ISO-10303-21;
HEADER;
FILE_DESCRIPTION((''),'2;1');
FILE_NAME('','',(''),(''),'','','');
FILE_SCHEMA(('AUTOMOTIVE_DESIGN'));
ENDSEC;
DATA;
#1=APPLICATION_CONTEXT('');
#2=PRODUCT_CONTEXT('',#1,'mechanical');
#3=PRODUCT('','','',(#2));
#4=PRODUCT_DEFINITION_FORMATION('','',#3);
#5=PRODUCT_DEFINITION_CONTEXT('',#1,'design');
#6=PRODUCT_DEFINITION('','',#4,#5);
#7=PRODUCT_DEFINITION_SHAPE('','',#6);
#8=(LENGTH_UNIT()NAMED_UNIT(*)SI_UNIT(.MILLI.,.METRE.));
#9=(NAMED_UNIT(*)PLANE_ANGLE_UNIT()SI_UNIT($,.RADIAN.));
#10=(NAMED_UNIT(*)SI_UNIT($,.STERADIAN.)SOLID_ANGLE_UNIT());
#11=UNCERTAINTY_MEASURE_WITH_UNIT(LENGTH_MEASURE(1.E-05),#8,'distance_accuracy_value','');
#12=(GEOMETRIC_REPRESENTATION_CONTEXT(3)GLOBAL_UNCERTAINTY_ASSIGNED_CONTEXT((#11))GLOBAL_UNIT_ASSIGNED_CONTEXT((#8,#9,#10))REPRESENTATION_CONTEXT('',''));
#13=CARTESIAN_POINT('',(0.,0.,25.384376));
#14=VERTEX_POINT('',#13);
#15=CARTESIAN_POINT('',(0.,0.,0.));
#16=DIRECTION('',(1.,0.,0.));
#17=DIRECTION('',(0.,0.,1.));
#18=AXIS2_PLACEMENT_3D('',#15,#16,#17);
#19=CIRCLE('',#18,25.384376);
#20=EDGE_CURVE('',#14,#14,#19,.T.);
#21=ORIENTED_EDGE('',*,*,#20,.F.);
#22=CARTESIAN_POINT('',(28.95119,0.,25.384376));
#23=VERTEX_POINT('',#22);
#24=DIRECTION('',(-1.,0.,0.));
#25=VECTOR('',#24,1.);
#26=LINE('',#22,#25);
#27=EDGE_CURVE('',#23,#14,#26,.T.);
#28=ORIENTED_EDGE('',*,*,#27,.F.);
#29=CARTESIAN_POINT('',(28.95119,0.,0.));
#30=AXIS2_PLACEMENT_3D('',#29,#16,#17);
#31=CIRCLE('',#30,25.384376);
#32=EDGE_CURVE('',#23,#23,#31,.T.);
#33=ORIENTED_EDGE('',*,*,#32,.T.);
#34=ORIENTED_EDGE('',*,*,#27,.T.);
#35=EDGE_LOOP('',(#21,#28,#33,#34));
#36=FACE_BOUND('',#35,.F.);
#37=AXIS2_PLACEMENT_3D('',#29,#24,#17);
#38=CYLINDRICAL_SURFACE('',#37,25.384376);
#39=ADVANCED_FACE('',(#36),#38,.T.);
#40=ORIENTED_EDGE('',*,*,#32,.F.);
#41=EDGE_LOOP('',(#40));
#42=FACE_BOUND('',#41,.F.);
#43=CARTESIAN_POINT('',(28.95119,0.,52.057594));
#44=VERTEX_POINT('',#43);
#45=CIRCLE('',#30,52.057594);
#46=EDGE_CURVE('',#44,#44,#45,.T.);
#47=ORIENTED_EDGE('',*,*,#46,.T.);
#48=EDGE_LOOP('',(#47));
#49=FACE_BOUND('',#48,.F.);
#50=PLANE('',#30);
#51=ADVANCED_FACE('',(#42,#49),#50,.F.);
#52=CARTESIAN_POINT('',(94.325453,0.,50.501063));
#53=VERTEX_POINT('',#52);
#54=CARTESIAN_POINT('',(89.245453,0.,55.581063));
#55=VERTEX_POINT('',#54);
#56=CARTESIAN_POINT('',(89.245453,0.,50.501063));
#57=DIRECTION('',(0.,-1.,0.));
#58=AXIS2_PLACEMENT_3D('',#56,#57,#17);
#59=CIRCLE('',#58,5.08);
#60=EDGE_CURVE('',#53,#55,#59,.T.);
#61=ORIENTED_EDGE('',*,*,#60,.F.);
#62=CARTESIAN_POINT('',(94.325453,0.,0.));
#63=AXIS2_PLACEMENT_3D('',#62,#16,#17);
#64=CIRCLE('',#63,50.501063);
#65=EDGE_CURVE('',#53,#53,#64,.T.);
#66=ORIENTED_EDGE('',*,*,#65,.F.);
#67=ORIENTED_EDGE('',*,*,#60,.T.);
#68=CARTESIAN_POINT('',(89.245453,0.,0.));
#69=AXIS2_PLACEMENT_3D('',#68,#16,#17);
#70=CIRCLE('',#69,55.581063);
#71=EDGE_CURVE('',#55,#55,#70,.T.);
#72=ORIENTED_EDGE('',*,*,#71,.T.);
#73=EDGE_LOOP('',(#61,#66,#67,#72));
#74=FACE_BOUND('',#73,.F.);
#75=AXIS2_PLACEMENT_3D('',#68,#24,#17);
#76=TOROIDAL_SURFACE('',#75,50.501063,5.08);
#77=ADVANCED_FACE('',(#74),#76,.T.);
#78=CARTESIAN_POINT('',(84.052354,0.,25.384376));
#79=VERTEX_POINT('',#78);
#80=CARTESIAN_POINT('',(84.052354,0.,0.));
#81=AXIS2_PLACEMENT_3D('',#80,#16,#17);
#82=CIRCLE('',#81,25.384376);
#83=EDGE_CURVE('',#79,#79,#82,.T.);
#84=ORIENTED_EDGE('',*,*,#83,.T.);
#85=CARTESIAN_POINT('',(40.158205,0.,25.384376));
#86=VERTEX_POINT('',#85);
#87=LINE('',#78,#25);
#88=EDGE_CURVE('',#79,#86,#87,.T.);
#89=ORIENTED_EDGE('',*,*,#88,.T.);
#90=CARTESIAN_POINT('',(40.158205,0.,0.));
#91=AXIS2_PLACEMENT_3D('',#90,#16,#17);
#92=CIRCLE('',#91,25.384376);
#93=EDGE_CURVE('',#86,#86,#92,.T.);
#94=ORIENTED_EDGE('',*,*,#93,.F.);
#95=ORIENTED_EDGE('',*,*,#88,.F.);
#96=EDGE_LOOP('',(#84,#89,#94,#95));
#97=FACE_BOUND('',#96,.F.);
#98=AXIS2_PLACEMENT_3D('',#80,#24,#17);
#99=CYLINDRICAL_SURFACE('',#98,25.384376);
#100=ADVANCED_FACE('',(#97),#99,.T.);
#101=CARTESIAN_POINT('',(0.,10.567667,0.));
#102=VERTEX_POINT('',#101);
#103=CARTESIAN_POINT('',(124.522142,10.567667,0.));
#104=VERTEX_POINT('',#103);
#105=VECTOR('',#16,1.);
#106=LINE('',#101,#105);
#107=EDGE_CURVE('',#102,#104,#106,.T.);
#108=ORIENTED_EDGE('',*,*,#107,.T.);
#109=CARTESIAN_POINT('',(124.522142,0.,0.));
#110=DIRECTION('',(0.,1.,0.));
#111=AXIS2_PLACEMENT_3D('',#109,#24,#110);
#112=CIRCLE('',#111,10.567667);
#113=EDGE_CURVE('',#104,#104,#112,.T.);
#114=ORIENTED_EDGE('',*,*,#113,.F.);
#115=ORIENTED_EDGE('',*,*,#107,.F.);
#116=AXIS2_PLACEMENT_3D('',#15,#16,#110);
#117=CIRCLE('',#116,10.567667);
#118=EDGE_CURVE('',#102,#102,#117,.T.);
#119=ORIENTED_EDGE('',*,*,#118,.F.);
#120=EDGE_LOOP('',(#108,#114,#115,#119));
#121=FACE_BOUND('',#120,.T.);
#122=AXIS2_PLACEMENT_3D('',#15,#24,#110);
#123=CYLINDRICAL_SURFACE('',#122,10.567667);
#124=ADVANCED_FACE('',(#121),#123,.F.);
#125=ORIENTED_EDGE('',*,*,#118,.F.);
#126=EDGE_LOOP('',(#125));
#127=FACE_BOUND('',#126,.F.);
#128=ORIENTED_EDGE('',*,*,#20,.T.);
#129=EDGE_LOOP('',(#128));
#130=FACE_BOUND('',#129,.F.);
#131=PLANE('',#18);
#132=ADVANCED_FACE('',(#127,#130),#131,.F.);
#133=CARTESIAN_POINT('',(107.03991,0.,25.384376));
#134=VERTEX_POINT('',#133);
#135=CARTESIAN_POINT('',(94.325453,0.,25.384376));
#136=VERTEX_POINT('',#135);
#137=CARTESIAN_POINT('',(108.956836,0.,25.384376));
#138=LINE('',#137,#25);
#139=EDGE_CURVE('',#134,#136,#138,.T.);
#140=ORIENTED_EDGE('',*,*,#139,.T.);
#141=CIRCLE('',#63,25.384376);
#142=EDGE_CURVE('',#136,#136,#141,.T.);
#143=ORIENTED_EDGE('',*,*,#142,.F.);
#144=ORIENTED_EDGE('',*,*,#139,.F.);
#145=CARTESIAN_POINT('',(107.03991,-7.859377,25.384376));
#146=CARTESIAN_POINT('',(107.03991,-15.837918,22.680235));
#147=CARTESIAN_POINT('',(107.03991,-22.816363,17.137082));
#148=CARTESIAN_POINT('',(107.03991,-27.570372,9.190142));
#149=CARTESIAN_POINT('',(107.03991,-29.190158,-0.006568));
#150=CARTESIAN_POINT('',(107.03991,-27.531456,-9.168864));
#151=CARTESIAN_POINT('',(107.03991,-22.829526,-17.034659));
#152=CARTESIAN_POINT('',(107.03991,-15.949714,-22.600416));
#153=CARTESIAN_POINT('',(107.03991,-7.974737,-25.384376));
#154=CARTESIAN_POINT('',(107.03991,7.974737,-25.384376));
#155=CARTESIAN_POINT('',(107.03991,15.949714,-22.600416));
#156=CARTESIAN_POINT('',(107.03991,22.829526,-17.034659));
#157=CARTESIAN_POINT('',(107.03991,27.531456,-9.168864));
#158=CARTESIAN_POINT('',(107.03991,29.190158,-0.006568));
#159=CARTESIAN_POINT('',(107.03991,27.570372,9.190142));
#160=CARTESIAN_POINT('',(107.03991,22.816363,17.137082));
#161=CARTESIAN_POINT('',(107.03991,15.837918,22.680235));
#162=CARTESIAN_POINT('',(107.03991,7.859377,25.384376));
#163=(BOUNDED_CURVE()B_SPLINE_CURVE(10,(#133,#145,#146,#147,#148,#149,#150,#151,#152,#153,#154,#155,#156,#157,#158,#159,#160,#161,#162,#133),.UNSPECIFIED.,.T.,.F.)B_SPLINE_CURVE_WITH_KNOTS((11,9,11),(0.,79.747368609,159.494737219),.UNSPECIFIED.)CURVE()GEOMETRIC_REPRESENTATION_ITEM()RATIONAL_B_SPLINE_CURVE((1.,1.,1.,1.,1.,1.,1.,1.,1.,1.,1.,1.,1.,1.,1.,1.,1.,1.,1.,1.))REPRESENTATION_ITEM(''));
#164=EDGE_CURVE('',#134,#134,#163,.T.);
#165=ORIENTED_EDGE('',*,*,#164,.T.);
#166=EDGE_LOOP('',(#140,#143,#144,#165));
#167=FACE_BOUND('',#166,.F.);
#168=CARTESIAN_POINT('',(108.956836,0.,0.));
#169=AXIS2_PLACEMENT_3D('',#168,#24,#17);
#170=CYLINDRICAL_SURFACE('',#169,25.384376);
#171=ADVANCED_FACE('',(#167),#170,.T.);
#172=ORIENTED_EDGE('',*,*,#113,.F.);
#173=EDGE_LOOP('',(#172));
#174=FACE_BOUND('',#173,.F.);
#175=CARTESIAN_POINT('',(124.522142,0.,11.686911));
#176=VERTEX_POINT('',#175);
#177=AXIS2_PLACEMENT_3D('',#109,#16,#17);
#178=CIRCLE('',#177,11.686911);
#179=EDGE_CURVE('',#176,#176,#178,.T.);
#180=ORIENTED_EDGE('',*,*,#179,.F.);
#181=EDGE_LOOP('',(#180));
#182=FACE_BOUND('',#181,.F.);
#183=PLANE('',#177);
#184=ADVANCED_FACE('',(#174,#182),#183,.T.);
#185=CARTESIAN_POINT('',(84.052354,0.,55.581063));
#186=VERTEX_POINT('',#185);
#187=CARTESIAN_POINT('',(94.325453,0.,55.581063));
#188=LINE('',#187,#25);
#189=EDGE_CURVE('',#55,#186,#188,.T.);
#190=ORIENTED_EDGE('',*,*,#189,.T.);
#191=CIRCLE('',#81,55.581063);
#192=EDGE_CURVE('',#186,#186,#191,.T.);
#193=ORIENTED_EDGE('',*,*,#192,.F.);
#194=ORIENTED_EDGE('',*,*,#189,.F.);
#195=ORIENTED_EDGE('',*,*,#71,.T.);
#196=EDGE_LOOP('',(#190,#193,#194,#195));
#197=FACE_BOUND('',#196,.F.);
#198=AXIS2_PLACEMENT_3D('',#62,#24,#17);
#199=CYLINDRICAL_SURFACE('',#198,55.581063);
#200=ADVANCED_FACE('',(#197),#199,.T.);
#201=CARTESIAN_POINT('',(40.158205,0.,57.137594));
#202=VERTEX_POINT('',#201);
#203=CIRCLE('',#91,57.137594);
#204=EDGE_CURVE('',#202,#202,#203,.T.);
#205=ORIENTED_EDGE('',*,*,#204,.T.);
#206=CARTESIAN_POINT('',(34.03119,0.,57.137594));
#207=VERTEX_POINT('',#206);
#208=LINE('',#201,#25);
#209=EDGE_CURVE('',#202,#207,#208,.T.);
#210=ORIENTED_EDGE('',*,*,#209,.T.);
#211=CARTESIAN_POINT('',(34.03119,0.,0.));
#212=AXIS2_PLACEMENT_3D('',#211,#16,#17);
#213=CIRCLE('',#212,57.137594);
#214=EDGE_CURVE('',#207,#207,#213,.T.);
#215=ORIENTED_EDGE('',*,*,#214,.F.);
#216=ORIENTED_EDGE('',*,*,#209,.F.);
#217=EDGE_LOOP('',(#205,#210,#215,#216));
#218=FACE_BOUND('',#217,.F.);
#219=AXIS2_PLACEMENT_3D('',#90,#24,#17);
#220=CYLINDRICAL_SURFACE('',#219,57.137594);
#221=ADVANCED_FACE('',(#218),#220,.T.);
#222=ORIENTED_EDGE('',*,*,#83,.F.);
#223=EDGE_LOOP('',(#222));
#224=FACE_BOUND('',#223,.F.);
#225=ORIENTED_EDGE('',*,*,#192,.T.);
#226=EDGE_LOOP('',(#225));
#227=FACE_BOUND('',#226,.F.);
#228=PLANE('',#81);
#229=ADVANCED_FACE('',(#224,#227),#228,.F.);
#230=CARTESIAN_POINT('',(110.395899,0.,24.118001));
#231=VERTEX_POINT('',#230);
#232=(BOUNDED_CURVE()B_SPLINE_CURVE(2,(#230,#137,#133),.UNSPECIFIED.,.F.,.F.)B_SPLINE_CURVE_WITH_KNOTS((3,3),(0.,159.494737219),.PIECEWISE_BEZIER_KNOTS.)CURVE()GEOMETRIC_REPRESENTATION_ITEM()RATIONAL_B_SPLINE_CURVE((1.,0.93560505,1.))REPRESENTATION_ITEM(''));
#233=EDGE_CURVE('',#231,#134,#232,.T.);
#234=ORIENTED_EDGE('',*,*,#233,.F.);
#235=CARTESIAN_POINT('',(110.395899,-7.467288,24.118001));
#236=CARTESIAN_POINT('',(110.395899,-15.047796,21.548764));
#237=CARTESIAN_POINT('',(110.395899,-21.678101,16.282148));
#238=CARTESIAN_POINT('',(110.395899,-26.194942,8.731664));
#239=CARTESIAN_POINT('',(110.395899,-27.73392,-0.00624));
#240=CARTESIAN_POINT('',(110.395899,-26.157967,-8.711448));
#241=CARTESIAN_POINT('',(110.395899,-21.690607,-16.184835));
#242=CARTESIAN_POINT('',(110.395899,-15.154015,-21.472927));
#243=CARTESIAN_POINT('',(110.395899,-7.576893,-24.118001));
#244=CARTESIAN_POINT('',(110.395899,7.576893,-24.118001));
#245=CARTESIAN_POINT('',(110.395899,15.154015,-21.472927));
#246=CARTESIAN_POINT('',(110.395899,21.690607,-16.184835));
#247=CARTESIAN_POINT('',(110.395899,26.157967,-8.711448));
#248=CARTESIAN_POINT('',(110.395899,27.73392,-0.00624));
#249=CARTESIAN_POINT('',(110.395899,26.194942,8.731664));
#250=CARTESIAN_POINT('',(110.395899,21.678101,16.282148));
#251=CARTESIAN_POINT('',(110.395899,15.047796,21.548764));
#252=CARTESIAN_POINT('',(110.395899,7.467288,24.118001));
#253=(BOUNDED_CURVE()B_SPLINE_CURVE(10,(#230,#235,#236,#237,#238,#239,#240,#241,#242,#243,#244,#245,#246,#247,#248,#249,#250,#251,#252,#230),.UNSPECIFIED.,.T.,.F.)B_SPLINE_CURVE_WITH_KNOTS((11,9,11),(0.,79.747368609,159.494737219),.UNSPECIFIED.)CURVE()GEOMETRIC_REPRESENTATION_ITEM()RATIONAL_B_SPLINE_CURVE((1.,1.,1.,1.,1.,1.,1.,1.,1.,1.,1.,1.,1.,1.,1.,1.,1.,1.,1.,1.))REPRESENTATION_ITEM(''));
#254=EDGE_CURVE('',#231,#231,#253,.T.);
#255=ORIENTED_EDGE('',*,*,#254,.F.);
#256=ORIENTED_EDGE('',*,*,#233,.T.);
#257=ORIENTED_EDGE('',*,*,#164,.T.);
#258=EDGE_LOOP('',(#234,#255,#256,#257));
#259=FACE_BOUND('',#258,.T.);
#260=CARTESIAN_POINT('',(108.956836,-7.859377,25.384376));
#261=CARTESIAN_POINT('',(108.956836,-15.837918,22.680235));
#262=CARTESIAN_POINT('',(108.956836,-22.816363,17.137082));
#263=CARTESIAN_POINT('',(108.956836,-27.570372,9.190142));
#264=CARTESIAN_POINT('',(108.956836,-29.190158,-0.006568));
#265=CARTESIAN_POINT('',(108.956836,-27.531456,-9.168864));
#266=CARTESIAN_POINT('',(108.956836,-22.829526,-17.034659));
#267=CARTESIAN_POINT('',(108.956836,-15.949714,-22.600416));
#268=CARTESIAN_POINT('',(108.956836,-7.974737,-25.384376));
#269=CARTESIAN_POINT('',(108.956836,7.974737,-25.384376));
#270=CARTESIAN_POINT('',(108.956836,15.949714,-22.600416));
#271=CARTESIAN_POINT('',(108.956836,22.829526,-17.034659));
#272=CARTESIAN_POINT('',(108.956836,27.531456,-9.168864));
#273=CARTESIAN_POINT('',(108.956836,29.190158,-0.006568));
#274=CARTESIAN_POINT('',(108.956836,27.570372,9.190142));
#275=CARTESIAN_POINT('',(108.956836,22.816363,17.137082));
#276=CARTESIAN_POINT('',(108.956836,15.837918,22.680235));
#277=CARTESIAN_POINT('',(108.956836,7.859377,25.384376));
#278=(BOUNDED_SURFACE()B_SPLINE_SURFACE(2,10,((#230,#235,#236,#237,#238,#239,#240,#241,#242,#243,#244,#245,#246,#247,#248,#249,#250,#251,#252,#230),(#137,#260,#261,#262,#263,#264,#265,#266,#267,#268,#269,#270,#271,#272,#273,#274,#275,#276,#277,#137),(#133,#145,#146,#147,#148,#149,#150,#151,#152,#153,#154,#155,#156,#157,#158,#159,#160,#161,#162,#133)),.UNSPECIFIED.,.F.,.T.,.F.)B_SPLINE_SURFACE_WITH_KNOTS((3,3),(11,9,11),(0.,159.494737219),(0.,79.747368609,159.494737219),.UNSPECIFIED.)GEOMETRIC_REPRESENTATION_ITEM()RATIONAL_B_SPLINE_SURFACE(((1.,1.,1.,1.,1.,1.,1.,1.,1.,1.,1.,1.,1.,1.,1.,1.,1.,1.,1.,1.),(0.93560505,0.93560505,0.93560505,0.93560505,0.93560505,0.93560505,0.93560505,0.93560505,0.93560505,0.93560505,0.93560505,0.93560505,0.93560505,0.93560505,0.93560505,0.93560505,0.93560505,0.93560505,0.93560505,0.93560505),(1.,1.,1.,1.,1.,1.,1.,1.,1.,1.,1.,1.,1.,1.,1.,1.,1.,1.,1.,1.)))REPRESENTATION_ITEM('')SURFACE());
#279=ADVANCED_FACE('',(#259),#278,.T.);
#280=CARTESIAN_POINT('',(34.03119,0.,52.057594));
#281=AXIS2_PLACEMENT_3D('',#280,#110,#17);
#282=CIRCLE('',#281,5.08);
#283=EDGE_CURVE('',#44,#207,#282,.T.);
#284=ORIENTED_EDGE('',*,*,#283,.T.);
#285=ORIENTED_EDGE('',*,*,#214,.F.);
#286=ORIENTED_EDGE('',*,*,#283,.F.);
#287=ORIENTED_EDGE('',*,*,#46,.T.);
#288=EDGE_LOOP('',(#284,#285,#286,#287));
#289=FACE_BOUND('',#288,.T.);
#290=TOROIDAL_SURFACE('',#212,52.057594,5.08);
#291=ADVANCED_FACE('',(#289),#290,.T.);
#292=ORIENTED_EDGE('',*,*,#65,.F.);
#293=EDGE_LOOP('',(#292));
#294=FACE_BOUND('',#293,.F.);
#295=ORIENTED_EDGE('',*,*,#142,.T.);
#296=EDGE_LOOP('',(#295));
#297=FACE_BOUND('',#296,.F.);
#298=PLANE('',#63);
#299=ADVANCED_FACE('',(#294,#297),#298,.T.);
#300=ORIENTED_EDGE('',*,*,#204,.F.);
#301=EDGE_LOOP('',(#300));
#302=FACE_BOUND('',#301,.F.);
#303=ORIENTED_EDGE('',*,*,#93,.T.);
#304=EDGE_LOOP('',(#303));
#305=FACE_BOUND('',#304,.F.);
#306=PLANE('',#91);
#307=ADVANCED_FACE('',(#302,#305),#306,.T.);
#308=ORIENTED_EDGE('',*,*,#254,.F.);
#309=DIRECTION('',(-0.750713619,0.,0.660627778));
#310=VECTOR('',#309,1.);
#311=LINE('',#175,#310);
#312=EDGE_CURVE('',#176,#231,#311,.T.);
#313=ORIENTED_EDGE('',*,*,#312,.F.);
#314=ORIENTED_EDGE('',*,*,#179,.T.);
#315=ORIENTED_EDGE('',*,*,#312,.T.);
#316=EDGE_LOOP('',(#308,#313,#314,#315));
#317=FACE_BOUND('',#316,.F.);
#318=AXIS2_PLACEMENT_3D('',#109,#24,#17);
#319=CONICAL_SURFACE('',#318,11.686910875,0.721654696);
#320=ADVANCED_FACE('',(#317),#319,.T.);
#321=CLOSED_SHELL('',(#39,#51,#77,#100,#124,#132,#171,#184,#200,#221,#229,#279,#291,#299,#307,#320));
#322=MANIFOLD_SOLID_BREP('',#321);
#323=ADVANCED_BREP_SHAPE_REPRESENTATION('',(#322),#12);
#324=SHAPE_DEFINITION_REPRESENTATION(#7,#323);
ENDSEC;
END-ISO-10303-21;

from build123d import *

# Parameters (mm, degrees)
F2_R     = 10.5676667099
F3_DEPTH = 124.5231421123
F4_R     = 5.08


# Not quite as in the source:
# - a feature names something its author has since deleted; it is built from what else it names


with BuildPart() as f1:
    # F0 (on Front) → F1 (revolve)
    with BuildSketch(Plane.XZ):
        Polygon((0, 25.3843758255), (0, 0), (124.5221421123, 0), (124.5221421123, 11.6869108751), (108.956836164, 25.3843758255), (94.325453043, 25.3843758255), (94.325453043, 55.5810630322), (84.0523540974, 55.5810630322), (84.0523540974, 25.3843758255), (40.1582047343, 25.3843758255), (40.1582047343, 57.137593627), (28.951190412, 57.137593627), (28.951190412, 25.3843758255), align=None)
    revolve(axis=Axis((62.2610710561, 0, 0), (1, 0, 0)))

    # F2 (on Right) → F3 (cut, through all)
    with BuildSketch(Plane.YZ):
        Circle(F2_R)
    extrude(amount=F3_DEPTH, mode=Mode.SUBTRACT)

    # F4
    f4_edges = [f1.edges().sort_by_distance(p)[0] for p in [
        (108.956836, 0, -25.384376),
        (94.325453, 0, -55.581063),
        (28.95119, 0, -57.137594),
    ]]
    fillet(f4_edges, radius=F4_R)


solid = f1.part
